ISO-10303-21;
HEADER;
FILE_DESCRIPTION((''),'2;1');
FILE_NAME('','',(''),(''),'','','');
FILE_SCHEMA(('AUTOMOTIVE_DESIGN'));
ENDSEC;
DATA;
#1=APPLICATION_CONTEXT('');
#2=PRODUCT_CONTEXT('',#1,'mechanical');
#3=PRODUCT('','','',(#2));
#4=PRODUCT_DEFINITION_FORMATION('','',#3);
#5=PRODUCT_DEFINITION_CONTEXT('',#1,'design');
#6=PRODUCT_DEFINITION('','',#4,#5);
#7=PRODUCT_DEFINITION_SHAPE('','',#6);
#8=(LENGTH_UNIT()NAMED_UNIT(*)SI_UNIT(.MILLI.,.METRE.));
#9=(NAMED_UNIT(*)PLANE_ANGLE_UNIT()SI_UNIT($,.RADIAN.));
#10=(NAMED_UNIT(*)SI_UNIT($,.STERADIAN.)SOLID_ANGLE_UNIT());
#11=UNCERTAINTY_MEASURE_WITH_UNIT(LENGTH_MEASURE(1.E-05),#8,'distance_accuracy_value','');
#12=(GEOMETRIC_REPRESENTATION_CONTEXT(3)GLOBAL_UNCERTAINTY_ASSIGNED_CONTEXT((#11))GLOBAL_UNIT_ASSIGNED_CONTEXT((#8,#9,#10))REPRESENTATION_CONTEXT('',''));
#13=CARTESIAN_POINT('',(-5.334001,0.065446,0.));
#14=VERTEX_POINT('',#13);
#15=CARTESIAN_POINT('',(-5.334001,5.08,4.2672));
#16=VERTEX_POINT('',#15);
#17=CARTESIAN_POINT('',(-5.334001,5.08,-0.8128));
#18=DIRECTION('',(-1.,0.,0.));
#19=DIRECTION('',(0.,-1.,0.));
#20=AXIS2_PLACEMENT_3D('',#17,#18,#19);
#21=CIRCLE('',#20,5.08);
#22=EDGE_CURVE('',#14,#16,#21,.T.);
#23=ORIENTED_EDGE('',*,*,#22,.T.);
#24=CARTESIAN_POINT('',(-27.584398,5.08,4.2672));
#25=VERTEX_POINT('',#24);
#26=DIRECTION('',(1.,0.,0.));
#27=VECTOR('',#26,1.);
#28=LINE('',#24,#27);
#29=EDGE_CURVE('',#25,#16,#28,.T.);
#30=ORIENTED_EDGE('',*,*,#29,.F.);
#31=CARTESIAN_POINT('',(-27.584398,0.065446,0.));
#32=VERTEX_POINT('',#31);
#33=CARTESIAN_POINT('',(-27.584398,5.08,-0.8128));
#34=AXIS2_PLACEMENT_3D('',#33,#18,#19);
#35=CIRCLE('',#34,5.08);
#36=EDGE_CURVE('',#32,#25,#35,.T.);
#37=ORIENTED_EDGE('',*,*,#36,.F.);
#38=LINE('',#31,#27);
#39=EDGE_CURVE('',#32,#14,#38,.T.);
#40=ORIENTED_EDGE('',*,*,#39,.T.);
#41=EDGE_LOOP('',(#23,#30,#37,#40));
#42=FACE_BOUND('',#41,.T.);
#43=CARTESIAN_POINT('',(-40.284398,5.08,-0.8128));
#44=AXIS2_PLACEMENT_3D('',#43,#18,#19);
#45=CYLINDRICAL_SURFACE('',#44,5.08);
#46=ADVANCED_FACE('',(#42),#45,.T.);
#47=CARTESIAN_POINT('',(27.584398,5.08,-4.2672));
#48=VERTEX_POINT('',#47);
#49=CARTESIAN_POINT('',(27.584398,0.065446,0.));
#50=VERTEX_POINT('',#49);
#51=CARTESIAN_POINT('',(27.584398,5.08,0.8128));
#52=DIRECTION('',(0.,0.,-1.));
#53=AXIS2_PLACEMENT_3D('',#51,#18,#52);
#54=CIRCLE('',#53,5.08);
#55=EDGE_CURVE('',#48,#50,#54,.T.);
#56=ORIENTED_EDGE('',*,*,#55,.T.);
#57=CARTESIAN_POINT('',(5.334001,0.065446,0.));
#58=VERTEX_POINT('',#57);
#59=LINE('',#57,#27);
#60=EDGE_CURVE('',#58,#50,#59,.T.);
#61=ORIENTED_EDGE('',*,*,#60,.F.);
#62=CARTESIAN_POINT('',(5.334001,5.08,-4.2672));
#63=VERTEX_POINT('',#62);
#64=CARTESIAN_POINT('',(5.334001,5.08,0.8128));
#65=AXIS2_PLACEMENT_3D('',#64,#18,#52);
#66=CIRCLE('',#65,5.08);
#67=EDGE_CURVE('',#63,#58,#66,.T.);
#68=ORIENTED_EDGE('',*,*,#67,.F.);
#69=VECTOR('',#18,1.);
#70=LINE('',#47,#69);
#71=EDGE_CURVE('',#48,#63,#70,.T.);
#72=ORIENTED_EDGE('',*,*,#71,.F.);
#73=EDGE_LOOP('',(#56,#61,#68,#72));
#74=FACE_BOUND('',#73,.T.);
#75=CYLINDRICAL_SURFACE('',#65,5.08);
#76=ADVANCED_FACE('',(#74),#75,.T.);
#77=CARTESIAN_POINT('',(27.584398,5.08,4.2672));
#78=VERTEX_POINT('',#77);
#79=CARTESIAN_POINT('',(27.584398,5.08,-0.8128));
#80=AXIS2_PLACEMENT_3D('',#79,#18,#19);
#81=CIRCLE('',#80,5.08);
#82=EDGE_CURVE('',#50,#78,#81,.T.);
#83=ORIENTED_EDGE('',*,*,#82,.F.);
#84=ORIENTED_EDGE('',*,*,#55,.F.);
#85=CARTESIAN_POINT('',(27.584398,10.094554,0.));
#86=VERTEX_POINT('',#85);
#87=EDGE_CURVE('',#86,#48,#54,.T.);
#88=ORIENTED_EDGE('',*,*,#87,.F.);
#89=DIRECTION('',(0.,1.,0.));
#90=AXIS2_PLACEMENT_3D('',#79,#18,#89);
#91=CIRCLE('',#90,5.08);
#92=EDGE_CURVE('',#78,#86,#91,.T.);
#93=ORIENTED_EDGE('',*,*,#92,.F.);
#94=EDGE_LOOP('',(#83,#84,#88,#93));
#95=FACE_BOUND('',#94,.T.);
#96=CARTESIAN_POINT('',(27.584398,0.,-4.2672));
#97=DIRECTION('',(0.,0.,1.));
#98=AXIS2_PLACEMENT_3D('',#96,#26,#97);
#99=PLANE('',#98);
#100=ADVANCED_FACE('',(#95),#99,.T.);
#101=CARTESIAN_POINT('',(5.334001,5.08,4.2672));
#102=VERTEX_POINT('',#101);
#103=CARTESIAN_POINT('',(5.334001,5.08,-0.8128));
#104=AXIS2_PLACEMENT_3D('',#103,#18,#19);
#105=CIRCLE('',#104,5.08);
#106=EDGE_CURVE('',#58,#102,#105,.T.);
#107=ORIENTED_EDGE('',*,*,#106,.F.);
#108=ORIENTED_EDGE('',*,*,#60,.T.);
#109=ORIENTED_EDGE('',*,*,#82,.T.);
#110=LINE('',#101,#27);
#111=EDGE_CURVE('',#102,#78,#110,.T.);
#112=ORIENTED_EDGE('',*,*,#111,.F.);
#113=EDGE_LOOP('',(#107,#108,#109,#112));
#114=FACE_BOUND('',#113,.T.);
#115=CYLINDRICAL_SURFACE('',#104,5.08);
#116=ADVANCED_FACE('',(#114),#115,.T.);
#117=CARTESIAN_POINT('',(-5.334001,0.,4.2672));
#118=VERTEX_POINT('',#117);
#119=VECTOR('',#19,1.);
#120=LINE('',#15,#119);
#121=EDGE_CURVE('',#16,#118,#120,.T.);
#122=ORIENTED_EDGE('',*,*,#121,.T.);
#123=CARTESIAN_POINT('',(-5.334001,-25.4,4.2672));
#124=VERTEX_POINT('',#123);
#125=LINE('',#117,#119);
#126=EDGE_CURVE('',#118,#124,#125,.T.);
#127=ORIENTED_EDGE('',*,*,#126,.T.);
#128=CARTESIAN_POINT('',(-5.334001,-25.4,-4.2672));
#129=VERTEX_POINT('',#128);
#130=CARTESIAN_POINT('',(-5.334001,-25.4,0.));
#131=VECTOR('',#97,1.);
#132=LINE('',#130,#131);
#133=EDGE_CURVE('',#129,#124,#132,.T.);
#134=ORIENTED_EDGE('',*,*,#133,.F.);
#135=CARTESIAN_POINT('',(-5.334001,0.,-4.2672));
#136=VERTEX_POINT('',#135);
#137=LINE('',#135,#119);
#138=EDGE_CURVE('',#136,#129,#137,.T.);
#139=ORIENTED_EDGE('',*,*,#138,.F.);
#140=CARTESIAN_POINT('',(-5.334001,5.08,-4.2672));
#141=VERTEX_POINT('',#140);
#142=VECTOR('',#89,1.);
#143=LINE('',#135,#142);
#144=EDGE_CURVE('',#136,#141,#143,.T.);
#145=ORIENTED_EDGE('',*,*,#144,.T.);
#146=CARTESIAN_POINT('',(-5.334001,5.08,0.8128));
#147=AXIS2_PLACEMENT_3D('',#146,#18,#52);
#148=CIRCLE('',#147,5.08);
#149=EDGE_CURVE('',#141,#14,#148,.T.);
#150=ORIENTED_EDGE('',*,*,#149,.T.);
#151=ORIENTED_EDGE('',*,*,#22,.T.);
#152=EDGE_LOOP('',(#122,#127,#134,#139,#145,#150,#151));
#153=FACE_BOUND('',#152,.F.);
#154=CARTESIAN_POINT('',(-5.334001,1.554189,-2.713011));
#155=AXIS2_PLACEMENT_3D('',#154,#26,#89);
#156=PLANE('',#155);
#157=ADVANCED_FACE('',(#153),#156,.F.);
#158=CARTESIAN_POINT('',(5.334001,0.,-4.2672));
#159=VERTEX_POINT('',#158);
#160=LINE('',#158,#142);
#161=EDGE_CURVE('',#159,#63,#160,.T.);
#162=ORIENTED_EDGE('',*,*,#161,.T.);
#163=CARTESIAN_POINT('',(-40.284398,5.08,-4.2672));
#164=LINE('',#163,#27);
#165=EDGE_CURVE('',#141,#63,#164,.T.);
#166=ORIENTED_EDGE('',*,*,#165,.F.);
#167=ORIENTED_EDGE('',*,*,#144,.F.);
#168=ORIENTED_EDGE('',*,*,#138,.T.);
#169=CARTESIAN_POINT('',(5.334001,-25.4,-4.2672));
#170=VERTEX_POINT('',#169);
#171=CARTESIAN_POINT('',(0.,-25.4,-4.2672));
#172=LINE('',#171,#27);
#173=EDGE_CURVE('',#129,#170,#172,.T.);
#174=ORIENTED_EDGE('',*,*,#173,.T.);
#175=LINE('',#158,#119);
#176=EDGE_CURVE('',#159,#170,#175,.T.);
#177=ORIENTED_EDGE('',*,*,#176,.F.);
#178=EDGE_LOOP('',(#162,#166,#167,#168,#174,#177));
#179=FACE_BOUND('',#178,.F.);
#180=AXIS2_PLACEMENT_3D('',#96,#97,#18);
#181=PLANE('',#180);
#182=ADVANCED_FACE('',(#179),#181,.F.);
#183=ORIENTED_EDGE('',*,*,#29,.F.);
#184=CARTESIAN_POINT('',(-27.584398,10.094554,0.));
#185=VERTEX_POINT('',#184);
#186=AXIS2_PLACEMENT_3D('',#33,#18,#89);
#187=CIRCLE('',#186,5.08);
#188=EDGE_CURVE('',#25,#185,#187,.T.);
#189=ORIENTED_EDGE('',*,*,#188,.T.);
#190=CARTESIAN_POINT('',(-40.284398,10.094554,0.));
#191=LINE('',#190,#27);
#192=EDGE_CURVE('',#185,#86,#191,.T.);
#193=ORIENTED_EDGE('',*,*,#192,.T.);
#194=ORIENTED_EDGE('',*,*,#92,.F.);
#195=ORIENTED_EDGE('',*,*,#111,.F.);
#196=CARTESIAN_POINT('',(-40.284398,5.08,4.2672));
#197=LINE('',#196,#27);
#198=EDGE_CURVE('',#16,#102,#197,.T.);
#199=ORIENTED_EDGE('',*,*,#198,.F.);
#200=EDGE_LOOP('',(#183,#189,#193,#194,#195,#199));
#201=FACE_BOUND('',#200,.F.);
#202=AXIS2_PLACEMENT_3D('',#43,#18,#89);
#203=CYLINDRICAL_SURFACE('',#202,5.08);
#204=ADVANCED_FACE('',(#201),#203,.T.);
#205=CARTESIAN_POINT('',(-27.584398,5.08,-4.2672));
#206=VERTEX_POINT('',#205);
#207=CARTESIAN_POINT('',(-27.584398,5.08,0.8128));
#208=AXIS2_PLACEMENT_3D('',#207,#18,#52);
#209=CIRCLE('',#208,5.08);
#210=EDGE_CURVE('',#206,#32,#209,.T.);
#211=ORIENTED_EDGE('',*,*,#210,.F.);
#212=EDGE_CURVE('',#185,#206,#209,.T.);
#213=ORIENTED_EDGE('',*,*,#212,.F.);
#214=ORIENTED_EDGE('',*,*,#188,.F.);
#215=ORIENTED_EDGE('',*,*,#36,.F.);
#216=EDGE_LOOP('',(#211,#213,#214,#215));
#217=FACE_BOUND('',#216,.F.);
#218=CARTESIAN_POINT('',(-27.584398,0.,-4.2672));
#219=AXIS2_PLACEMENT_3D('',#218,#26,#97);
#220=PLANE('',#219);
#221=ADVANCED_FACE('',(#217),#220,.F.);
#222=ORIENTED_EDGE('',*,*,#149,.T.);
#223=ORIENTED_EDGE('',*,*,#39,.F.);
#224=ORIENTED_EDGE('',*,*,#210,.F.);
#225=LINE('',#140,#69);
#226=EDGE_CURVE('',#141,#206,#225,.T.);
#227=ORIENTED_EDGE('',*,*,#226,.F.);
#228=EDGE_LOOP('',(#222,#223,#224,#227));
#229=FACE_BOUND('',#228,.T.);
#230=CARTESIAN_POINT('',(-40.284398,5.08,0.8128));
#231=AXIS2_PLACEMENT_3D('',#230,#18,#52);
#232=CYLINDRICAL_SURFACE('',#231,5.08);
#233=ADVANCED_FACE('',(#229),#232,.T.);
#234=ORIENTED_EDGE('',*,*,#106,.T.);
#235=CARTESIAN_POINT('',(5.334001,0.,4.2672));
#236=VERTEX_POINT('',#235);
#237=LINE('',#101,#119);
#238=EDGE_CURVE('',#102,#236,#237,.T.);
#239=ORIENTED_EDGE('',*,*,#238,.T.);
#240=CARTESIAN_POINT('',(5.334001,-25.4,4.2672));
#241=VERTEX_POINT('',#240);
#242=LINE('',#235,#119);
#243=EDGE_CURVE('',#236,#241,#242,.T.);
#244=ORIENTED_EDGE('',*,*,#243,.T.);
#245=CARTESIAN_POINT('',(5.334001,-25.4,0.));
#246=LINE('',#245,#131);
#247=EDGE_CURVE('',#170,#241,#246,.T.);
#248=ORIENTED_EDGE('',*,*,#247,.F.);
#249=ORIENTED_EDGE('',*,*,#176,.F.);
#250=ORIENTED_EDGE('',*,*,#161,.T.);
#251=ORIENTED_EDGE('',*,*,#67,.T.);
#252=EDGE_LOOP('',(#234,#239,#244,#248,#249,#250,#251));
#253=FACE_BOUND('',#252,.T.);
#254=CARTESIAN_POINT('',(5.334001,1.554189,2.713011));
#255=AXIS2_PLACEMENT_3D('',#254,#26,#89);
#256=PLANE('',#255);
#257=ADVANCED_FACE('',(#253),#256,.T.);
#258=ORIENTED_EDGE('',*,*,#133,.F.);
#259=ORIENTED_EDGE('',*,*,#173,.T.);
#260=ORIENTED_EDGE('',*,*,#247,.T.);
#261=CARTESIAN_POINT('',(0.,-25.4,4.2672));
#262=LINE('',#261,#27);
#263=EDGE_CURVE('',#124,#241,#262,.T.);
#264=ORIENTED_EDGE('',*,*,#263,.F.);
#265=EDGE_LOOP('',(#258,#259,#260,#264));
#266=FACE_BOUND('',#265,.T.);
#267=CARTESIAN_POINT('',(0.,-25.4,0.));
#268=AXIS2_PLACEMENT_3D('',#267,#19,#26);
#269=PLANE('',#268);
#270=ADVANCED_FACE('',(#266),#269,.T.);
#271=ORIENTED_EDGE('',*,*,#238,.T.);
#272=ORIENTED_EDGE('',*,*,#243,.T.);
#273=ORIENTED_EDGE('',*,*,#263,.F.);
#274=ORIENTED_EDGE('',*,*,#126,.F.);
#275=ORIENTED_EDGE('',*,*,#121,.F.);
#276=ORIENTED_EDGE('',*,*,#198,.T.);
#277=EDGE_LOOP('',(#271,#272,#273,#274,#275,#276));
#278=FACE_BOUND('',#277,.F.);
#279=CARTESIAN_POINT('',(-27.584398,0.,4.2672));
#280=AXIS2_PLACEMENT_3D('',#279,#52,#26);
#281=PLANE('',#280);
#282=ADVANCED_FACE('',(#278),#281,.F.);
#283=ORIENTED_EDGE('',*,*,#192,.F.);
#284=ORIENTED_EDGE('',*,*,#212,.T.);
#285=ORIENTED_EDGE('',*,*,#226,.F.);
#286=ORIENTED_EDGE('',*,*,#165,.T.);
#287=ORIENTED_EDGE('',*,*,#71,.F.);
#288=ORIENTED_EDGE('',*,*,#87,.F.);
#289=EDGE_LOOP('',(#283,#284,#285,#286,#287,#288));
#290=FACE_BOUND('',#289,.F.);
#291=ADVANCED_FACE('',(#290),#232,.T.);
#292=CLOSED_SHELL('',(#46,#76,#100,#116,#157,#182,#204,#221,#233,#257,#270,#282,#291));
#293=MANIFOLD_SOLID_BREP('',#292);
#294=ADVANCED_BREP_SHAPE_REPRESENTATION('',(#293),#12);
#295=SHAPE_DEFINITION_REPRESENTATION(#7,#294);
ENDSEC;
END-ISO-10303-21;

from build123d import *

# Parameters (mm, degrees)
F0_W         = 10.668002069
F0_H         = 8.5344007239
F1_DEPTH     = 25.4
F2_W         = 22.2503971308
F2_H         = 8.5344007239
F2_W_2       = 10.668002069
F3_DEPTH     = 10.16
F4_T1_DEPTH  = 80.5687963307
F4_T3_DEPTH  = 34.9503971308
F4_T5_DEPTH  = 34.9503971308
F4_T10_DEPTH = 47.6503971308
F4_T15_DEPTH = 47.6503971308
F4_T20_DEPTH = 47.6503971308
F4_T25_DEPTH = 47.6503971308


# Not quite as in the source:
# - a fillet or chamfer that OpenCascade refuses, or shapes differently, is made with other operations: its cross-section is extruded or revolved along the edge and cut away or added


with BuildPart() as f1:
    # F0 (on Front) → F1 (new body)
    with BuildSketch(Plane.XZ):
        Rectangle(F0_W, F0_H)
    extrude(amount=F1_DEPTH)

    # F2 (on face) → F3 (join)
    with BuildSketch(Plane(origin=(0, 0, 0), x_dir=(-1, 0, 0), z_dir=(0, 1, 0))):
        with Locations((-16.4591995999, 0)):
            Rectangle(F2_W, F2_H)
        Rectangle(F2_W_2, F2_H)
        with Locations((16.4591995999, 0)):
            Rectangle(F2_W, F2_H)
    extrude(amount=F3_DEPTH)

    # F4: fillet of radius 5.08 on 6 edges, made by hand

    # F4_s2 → F4_t1 (cut)
    with BuildSketch(Plane.YZ.offset(-40.2843981653)):
        with BuildLine():
            ThreePointArc((10.16, -0.8127996381), (8.6721024484, 2.7793028104), (5.08, 4.2672003619))
            Line((5.08, 4.2672003619), (10.16, 4.2672003619))
            Line((10.16, 4.2672003619), (10.16, -0.8127996381))
        make_face()
        with BuildLine():
            ThreePointArc((5.08, -4.2672003619), (8.6721024484, -2.7793028104), (10.16, 0.8127996381))
            Line((10.16, 0.8127996381), (10.16, -4.2672003619))
            Line((10.16, -4.2672003619), (5.08, -4.2672003619))
        make_face()
    extrude(amount=F4_T1_DEPTH, mode=Mode.SUBTRACT)

    # F4_s4 → F4_t3 (cut)
    with BuildSketch(Plane.YZ.offset(5.3340010345)):
        with BuildLine():
            ThreePointArc((0, -0.8127996381), (1.4878975516, 2.7793028104), (5.08, 4.2672003619))
            Line((5.08, 4.2672003619), (0, 4.2672003619))
            Line((0, 4.2672003619), (0, -0.8127996381))
        make_face()
        with BuildLine():
            ThreePointArc((5.08, -4.2672003619), (1.4878975516, -2.7793028104), (0, 0.8127996381))
            Line((0, 0.8127996381), (0, -4.2672003619))
            Line((0, -4.2672003619), (5.08, -4.2672003619))
        make_face()
    extrude(amount=F4_T3_DEPTH, mode=Mode.SUBTRACT)

    # F4_s6 → F4_t5 (cut)
    with BuildSketch(Plane.YZ.offset(-40.2843981653)):
        with BuildLine():
            ThreePointArc((5.08, -4.2672003619), (1.4878975516, -2.7793028104), (0, 0.8127996381))
            Line((0, 0.8127996381), (0, -4.2672003619))
            Line((0, -4.2672003619), (5.08, -4.2672003619))
        make_face()
        with BuildLine():
            ThreePointArc((0, -0.8127996381), (1.4878975516, 2.7793028104), (5.08, 4.2672003619))
            Line((5.08, 4.2672003619), (0, 4.2672003619))
            Line((0, 4.2672003619), (0, -0.8127996381))
        make_face()
    extrude(amount=F4_T5_DEPTH, mode=Mode.SUBTRACT)


with BuildPart() as f4_tool8:
    # F4_s9 → F4_t10 (new body)
    with BuildSketch(Plane.YZ.offset(-7.3659989655)):
        with BuildLine():
            ThreePointArc((0, -0.8127996381), (1.4878975516, 2.7793028104), (5.08, 4.2672003619))
            Line((5.08, 4.2672003619), (0, 4.2672003619))
            Line((0, 4.2672003619), (0, -0.8127996381))
        make_face()
    extrude(amount=F4_T10_DEPTH)

    split(bisect_by=Plane.YZ.offset(-5.3340010345), keep=Keep.BOTTOM)


with BuildPart() as f1_1:
    add(f1.part)

    # F4_t7: cut F4_tool8
    add(f4_tool8.part, mode=Mode.SUBTRACT)


with BuildPart() as f4_tool13:
    # F4_s14 → F4_t15 (new body)
    with BuildSketch(Plane.YZ.offset(40.2843981653)):
        with BuildLine():
            ThreePointArc((5.08, -4.2672003619), (1.4878975516, -2.7793028104), (0, 0.8127996381))
            Line((0, 0.8127996381), (0, -4.2672003619))
            Line((0, -4.2672003619), (5.08, -4.2672003619))
        make_face()
    extrude(amount=-F4_T15_DEPTH)

    split(bisect_by=Plane.YZ.offset(-5.3340010345), keep=Keep.BOTTOM)


with BuildPart() as f1_2:
    add(f1_1.part)

    # F4_t12: cut F4_tool13
    add(f4_tool13.part, mode=Mode.SUBTRACT)


with BuildPart() as f4_tool18:
    # F4_s19 → F4_t20 (new body)
    with BuildSketch(Plane.YZ.offset(7.3659989655)):
        with BuildLine():
            ThreePointArc((5.08, -4.2672003619), (1.4878975516, -2.7793028104), (0, 0.8127996381))
            Line((0, 0.8127996381), (0, -4.2672003619))
            Line((0, -4.2672003619), (5.08, -4.2672003619))
        make_face()
    extrude(amount=-F4_T20_DEPTH)

    split(bisect_by=Plane.YZ.offset(5.3340010345), keep=Keep.TOP)


with BuildPart() as f1_3:
    add(f1_2.part)

    # F4_t17: cut F4_tool18
    add(f4_tool18.part, mode=Mode.SUBTRACT)


with BuildPart() as f4_tool23:
    # F4_s24 → F4_t25 (new body)
    with BuildSketch(Plane.YZ.offset(-40.2843981653)):
        with BuildLine():
            ThreePointArc((0, -0.8127996381), (1.4878975516, 2.7793028104), (5.08, 4.2672003619))
            Line((5.08, 4.2672003619), (0, 4.2672003619))
            Line((0, 4.2672003619), (0, -0.8127996381))
        make_face()
    extrude(amount=F4_T25_DEPTH)

    split(bisect_by=Plane.YZ.offset(5.3340010345), keep=Keep.TOP)


with BuildPart() as f1_4:
    add(f1_3.part)

    # F4_t22: cut F4_tool23
    add(f4_tool23.part, mode=Mode.SUBTRACT)


solid = f1_4.part
